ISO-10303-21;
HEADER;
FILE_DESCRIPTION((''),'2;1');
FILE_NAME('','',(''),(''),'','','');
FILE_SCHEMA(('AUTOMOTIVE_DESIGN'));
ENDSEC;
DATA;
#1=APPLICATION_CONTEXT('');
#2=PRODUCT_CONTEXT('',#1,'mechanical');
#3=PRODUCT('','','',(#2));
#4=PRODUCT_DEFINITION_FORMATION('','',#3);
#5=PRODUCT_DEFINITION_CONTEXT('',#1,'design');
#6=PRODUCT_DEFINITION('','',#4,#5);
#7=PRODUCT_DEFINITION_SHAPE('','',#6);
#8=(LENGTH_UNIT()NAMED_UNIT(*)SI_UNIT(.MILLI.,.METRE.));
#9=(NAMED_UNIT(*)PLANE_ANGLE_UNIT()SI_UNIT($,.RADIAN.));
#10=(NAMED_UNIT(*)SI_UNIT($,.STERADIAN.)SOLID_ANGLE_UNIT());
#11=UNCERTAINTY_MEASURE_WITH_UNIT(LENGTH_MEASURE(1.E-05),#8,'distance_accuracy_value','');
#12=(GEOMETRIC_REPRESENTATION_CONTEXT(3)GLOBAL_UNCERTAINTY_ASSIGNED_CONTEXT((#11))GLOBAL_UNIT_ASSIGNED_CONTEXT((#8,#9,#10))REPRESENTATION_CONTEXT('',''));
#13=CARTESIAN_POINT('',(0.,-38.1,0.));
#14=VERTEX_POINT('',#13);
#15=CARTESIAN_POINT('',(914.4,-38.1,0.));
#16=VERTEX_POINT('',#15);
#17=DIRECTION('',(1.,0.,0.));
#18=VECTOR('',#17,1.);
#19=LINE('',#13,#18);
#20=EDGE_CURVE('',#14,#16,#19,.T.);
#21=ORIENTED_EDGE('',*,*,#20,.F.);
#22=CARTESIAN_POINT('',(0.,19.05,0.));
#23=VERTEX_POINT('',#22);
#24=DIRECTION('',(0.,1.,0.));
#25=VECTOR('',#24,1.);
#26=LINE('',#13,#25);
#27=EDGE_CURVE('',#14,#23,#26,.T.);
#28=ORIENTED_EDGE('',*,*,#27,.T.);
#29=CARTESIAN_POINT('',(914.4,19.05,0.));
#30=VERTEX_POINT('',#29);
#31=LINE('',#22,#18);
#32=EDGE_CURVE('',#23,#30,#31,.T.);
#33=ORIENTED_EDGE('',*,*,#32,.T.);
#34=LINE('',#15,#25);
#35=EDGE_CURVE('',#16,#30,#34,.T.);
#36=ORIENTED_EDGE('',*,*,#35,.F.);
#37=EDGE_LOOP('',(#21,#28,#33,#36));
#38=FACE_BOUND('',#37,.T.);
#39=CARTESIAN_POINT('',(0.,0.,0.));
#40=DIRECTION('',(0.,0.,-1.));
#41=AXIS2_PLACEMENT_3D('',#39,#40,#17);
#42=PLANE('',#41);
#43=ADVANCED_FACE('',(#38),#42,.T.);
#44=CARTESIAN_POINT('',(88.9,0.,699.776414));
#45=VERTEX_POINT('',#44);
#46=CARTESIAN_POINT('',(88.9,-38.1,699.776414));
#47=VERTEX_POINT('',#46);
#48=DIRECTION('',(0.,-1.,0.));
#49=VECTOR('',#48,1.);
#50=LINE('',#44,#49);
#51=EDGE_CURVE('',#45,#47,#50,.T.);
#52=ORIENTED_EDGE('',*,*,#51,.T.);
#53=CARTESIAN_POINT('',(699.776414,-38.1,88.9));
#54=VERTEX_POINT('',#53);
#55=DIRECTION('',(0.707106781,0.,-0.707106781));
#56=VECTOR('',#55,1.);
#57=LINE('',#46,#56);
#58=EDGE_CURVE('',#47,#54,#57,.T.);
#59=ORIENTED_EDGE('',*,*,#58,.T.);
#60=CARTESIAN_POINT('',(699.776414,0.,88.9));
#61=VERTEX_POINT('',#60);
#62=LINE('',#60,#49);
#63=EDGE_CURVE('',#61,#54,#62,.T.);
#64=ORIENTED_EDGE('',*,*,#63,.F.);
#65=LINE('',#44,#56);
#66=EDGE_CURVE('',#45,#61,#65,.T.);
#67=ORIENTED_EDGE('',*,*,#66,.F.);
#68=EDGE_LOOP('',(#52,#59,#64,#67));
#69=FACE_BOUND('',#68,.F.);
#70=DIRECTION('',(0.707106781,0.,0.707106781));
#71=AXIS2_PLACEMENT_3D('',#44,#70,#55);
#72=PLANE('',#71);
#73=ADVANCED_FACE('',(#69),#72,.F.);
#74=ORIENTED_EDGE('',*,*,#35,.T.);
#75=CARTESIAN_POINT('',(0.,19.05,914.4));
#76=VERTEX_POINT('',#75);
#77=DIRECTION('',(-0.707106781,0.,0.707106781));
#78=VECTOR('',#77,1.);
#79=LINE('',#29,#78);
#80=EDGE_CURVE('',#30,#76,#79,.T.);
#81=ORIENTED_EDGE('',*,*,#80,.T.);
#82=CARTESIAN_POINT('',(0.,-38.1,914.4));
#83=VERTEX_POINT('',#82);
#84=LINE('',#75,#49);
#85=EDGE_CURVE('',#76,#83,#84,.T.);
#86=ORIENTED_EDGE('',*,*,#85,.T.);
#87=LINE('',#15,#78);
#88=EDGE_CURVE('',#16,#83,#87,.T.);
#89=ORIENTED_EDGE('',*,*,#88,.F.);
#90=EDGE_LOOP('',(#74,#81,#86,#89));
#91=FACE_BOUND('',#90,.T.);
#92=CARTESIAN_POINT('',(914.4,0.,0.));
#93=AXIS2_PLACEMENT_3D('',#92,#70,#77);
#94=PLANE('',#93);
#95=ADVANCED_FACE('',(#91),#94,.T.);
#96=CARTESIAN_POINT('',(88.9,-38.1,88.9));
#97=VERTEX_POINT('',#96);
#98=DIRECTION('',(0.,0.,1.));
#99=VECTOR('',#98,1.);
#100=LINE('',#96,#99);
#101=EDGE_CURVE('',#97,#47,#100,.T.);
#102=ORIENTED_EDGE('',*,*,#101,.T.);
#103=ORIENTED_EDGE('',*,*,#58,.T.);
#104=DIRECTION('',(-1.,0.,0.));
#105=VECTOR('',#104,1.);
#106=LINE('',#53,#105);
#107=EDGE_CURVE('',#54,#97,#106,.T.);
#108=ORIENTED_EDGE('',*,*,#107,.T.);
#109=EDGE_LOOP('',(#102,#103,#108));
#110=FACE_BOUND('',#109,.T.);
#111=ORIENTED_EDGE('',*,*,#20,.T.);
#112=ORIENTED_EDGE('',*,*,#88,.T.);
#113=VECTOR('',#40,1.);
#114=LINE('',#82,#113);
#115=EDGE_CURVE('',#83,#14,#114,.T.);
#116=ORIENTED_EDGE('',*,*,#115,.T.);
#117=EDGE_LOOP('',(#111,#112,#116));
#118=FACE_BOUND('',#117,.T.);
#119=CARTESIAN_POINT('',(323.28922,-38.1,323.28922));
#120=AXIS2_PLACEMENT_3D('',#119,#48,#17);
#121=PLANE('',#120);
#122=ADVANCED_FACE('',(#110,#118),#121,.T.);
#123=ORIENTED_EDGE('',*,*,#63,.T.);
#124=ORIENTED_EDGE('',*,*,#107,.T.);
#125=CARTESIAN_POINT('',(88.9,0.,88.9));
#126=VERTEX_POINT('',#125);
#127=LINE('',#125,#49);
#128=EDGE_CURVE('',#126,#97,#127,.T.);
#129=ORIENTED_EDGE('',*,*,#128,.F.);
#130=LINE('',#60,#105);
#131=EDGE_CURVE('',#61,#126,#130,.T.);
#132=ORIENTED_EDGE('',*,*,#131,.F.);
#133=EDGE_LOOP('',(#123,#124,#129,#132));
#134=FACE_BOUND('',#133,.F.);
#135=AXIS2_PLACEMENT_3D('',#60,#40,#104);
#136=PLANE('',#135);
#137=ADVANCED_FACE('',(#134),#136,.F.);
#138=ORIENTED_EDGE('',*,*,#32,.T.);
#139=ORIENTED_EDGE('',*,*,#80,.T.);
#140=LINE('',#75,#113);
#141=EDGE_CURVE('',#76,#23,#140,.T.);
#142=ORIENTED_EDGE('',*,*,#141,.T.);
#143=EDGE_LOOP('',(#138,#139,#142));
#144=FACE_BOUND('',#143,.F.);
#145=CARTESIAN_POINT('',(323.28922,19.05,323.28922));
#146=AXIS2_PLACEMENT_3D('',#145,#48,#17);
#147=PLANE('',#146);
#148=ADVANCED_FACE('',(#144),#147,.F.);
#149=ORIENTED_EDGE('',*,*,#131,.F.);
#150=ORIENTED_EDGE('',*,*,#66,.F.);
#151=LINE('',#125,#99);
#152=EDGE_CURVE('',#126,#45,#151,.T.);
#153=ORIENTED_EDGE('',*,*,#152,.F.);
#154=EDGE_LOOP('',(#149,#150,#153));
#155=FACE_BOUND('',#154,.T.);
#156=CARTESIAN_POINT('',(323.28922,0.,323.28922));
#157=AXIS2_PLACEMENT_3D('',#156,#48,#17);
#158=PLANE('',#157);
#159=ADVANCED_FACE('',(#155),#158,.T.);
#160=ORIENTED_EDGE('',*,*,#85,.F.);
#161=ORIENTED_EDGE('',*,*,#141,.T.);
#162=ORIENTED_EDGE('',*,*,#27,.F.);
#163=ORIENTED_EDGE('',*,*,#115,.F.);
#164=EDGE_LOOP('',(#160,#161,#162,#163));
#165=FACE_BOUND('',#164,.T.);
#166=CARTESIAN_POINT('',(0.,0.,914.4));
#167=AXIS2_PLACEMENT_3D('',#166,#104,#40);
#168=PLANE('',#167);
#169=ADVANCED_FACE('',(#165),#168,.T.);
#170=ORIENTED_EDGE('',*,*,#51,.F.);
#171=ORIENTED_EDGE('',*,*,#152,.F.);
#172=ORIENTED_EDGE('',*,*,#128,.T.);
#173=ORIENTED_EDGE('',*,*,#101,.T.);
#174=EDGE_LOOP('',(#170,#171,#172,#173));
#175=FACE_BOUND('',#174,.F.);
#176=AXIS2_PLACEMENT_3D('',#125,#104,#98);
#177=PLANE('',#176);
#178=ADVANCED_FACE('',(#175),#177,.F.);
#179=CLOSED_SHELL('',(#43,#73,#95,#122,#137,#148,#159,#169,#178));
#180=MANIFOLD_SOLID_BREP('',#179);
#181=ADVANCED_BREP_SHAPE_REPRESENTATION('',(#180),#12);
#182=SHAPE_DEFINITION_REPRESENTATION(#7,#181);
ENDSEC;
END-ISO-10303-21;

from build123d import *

# Parameters (mm, degrees)
F0_R     = 9.525
F1_DEPTH = 38.1
F2_DEPTH = 19.05


with BuildPart() as f1:
    # F0 (on Front) → F1 (new body)
    with BuildSketch(Plane.XZ):
        Polygon((914.4, 0), (0, 914.4), (0, 0), align=None)
        with Locations((44.45, 44.45)):
            Circle(F0_R, mode=Mode.SUBTRACT)
        Polygon((699.776414305, 88.9), (88.9, 88.9), (88.9, 699.776414305), align=None, mode=Mode.SUBTRACT)
        with Locations((44.45, 44.45)):
            Circle(F0_R)
    extrude(amount=F1_DEPTH)

    # F0 (on Front) → F2 (join)
    with BuildSketch(Plane.XZ):
        Polygon((914.4, 0), (0, 914.4), (0, 0), align=None)
        with Locations((44.45, 44.45)):
            Circle(F0_R, mode=Mode.SUBTRACT)
        Polygon((699.776414305, 88.9), (88.9, 88.9), (88.9, 699.776414305), align=None, mode=Mode.SUBTRACT)
        Polygon((88.9, 699.776414305), (88.9, 88.9), (699.776414305, 88.9), align=None)
        with Locations((44.45, 44.45)):
            Circle(F0_R)
    extrude(amount=-F2_DEPTH)


solid = f1.part
